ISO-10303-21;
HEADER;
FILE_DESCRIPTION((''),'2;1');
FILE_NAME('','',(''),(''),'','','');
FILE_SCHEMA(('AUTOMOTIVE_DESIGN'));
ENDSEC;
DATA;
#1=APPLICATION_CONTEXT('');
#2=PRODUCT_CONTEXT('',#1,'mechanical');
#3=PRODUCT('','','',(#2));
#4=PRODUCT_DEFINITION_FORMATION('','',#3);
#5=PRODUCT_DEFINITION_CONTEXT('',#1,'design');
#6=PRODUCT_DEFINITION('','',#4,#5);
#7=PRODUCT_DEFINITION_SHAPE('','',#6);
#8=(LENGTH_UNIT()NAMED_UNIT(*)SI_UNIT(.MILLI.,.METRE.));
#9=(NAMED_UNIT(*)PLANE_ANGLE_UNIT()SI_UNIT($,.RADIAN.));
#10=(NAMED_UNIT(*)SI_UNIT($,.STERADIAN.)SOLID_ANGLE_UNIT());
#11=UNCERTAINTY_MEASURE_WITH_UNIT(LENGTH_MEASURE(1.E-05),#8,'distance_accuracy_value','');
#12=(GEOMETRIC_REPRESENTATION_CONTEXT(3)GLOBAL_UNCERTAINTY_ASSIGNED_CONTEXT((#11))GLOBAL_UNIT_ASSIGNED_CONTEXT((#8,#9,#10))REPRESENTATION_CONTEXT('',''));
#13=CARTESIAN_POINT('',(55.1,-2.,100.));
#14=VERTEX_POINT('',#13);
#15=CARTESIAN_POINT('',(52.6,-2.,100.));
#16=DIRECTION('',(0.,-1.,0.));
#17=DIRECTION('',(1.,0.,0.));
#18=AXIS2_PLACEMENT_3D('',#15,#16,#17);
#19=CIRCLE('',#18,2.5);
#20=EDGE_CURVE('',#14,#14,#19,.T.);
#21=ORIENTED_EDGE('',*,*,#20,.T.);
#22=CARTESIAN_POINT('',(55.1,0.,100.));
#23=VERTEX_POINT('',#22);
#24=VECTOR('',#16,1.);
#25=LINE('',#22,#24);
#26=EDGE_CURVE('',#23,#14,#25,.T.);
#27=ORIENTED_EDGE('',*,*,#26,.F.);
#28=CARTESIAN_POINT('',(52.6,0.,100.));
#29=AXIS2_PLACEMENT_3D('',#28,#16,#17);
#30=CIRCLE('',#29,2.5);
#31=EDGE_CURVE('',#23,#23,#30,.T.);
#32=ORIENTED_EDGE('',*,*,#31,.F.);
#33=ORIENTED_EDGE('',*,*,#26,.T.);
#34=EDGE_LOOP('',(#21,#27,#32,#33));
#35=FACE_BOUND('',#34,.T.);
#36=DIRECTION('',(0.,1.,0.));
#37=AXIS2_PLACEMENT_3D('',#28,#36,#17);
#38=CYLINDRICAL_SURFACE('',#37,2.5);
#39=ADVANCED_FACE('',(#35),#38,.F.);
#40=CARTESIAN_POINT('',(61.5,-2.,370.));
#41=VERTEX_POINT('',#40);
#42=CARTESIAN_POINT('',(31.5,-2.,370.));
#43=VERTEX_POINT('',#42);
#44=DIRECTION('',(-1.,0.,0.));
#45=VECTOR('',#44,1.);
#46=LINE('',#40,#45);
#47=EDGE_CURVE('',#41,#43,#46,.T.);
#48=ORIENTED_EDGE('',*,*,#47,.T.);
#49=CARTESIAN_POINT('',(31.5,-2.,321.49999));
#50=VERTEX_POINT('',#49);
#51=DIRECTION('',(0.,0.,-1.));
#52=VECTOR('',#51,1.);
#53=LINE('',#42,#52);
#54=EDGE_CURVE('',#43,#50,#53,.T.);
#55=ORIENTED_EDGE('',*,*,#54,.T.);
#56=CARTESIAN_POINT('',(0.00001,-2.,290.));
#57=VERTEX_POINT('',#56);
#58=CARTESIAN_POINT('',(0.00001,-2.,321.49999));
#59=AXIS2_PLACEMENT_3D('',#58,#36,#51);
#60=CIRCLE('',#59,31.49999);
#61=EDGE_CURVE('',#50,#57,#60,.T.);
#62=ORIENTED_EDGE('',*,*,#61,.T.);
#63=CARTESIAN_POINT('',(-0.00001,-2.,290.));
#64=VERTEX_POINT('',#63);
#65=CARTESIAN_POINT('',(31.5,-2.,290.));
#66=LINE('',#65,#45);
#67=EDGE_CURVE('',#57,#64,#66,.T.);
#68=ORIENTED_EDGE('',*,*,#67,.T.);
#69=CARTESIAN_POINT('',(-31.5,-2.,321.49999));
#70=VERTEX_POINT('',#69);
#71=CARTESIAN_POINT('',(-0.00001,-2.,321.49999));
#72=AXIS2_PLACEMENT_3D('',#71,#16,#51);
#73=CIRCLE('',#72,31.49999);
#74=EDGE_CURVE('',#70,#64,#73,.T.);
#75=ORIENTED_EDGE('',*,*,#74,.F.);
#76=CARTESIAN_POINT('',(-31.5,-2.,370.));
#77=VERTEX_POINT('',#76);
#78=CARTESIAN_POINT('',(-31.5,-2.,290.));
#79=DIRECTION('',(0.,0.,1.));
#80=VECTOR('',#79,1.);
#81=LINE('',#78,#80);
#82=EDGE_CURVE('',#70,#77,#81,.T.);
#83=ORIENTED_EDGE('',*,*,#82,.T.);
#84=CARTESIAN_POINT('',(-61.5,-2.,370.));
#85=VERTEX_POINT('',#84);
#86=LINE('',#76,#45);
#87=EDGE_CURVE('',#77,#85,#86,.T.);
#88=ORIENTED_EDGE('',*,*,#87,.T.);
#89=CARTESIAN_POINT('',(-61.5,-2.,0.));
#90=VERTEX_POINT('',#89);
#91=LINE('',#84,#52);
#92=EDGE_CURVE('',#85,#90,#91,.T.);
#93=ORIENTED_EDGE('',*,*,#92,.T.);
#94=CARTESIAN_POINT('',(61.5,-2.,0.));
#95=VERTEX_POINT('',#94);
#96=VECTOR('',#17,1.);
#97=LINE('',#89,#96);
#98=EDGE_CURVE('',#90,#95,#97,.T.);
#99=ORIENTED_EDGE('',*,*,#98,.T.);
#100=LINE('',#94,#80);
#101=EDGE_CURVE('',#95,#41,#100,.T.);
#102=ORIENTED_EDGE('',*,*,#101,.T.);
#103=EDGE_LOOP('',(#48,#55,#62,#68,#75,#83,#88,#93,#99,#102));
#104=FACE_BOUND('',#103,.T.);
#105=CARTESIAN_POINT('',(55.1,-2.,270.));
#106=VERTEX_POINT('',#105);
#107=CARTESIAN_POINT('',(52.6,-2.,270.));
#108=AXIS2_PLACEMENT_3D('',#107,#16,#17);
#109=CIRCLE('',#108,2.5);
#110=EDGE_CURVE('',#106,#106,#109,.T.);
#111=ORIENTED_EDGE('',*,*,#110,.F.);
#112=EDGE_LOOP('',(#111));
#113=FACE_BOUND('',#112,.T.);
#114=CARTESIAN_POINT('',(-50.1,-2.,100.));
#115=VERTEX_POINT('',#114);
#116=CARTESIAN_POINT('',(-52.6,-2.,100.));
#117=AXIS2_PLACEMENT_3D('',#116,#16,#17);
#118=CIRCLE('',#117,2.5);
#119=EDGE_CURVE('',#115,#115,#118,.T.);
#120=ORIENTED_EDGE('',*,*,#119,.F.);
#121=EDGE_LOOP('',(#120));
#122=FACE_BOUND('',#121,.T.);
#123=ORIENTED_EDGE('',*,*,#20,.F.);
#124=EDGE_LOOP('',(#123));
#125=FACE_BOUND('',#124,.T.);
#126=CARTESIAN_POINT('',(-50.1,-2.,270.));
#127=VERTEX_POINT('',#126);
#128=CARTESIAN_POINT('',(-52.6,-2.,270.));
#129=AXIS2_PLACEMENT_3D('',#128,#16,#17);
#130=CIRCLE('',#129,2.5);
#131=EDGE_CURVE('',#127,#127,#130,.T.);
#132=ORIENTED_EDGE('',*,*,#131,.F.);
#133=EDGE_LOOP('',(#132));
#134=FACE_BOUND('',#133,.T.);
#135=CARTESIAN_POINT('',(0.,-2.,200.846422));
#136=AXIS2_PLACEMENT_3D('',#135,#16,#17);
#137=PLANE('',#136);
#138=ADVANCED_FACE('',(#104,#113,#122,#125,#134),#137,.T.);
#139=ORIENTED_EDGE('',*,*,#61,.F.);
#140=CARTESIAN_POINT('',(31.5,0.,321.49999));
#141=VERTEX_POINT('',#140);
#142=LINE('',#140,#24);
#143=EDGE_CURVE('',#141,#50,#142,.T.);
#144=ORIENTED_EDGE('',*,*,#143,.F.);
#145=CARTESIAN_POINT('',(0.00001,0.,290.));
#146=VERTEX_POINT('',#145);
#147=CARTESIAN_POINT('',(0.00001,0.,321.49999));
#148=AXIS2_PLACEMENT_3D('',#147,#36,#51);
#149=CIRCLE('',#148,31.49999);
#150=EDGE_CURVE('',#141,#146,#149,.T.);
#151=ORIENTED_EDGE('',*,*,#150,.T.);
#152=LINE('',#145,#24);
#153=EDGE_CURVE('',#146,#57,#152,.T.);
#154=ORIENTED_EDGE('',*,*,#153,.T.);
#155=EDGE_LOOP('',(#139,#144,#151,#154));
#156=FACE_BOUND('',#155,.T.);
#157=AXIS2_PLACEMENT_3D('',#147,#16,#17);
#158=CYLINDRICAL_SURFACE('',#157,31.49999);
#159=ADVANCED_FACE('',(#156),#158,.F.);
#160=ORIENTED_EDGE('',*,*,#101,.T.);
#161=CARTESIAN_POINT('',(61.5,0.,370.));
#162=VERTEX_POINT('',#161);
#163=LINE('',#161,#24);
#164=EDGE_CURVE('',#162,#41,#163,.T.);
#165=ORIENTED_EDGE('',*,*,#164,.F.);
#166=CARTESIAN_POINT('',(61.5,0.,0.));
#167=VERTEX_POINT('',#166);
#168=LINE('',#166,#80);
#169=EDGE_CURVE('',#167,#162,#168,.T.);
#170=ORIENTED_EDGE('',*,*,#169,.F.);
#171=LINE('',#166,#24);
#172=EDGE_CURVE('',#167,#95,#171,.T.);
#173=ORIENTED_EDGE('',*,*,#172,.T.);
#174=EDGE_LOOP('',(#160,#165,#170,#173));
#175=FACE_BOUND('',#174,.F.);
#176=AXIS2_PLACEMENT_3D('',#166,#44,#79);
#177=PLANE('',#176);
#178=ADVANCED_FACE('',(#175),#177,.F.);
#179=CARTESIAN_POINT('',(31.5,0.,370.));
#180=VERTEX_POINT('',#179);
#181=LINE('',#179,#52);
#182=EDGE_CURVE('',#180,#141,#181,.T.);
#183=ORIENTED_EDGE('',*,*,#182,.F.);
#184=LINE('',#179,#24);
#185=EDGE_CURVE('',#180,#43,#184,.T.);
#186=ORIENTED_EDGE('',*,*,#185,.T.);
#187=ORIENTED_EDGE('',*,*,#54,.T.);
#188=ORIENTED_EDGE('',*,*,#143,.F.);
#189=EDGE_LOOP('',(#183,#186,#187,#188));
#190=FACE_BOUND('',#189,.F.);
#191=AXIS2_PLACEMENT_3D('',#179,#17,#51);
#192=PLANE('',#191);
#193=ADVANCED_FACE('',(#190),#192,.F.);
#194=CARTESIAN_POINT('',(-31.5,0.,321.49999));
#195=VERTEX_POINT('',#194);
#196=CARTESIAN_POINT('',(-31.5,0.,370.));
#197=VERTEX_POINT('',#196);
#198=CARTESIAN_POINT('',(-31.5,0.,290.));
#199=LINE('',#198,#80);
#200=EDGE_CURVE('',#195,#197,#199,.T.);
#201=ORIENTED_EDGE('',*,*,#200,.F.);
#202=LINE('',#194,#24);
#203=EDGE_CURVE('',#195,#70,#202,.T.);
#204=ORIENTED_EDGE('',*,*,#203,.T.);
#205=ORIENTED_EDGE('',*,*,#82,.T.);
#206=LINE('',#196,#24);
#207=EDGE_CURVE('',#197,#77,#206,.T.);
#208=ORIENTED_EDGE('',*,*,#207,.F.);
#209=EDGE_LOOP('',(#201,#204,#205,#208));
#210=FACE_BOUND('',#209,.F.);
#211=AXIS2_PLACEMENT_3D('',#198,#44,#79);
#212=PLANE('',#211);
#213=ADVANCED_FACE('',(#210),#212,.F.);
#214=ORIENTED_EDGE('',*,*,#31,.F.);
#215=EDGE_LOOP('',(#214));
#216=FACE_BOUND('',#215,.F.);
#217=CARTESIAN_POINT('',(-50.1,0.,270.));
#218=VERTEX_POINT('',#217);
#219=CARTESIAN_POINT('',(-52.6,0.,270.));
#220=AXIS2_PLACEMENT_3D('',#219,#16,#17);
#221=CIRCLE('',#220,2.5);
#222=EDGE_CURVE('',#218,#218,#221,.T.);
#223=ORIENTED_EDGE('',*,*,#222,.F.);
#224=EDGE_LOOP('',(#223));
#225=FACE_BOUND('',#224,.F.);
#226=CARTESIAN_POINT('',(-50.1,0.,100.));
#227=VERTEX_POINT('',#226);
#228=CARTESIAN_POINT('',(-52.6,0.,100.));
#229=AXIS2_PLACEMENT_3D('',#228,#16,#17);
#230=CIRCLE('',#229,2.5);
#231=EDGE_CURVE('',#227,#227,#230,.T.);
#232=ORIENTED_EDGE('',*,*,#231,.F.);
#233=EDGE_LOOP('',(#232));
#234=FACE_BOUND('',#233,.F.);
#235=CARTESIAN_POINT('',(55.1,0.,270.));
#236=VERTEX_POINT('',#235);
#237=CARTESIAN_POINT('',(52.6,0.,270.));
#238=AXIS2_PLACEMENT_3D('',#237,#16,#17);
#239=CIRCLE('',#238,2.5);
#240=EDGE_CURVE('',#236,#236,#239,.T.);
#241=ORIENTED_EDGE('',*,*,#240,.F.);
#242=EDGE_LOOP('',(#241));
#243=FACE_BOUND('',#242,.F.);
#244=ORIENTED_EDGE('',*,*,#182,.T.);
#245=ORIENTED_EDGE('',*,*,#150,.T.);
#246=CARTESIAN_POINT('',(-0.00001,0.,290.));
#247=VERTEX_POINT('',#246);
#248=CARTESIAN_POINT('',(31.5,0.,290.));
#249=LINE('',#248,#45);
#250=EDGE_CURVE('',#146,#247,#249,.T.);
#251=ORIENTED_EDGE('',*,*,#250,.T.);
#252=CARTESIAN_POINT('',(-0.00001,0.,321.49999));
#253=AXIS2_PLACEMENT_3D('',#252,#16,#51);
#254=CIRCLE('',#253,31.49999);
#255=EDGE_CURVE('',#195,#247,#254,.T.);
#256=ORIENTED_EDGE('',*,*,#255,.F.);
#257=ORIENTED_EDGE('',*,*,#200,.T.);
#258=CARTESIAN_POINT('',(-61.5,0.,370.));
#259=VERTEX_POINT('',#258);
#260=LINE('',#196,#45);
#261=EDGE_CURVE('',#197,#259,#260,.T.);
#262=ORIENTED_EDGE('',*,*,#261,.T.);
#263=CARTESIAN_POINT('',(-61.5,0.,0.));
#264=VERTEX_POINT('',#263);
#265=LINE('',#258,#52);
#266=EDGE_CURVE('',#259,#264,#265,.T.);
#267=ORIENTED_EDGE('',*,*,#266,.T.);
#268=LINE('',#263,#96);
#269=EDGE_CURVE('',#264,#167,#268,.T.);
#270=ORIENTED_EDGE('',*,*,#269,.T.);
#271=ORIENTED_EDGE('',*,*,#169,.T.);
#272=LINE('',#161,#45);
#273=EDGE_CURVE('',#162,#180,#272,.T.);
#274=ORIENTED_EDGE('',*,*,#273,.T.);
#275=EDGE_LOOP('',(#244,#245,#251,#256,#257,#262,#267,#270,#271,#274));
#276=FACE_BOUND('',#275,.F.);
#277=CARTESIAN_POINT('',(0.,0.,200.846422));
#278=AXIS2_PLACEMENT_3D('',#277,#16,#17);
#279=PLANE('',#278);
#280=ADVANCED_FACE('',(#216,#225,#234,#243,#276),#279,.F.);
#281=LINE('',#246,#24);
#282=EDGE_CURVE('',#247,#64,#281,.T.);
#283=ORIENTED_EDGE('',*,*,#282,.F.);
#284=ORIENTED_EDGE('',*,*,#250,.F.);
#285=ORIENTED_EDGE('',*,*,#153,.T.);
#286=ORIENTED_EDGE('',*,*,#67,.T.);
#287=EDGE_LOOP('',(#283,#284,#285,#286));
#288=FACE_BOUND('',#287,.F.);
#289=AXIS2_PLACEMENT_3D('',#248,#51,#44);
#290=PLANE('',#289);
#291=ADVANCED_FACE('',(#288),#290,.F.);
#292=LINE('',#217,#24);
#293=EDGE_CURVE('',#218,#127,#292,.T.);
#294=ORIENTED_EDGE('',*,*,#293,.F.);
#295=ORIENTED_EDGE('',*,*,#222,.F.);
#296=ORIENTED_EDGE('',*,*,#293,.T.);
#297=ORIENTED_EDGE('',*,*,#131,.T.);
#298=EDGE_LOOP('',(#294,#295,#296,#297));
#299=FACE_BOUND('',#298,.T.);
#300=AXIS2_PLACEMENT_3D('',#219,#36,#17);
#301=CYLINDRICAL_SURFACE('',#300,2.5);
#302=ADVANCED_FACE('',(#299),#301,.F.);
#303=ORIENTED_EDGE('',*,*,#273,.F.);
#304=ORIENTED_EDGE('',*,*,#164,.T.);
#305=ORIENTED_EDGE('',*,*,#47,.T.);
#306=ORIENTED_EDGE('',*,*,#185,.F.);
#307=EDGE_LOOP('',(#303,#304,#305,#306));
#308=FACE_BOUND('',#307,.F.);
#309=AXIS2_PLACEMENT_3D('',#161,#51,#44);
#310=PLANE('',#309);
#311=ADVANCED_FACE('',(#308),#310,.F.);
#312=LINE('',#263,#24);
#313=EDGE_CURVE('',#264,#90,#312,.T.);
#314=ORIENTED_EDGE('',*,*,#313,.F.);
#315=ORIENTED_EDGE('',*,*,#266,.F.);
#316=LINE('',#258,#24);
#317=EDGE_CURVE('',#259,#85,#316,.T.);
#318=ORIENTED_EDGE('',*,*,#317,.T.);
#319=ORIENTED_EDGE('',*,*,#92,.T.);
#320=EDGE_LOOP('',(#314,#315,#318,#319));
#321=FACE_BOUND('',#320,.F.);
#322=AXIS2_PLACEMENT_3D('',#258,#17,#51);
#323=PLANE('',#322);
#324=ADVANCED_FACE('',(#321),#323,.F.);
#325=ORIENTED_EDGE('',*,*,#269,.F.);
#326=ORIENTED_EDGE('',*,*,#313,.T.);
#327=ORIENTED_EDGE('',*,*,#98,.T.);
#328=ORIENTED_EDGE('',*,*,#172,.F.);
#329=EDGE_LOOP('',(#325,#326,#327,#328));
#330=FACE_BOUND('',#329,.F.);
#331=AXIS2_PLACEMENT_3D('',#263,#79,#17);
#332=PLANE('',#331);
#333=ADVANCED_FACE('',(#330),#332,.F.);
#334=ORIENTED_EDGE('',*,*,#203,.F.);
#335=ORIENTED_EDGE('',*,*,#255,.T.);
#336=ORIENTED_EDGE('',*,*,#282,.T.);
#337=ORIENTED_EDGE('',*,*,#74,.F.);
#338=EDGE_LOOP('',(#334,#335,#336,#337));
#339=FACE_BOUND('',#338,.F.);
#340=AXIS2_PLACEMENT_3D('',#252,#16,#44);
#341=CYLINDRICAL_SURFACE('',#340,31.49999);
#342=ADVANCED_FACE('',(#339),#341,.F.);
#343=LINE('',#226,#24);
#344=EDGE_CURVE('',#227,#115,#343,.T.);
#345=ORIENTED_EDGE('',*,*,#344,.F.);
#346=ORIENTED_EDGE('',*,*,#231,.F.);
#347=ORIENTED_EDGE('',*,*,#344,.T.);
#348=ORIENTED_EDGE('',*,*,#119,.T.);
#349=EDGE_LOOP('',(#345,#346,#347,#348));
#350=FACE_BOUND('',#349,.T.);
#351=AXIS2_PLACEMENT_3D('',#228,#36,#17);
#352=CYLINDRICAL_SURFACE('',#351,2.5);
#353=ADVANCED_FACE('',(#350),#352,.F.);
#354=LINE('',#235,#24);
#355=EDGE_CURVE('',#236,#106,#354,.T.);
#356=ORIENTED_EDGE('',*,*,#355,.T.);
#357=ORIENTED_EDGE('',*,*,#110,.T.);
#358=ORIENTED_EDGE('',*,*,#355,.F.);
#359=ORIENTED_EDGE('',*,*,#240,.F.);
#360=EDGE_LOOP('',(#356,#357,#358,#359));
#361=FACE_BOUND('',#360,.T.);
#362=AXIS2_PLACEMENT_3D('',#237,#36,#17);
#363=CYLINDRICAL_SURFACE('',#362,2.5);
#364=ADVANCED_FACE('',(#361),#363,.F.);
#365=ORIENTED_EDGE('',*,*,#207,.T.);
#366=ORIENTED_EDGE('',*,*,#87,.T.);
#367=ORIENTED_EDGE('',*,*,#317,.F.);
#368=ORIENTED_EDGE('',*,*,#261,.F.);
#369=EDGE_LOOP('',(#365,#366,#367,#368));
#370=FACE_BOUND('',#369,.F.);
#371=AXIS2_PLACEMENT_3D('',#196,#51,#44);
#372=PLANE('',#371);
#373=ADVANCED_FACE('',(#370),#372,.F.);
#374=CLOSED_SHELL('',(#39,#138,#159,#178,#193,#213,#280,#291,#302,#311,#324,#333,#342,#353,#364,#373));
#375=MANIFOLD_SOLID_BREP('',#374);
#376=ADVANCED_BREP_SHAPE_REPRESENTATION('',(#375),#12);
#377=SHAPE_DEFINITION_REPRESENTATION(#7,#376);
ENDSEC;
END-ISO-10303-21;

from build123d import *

# Parameters (mm, degrees)
F0_R     = 2.5
F1_DEPTH = 2
F2_R     = 31.49999


# Not quite as in the source:
# - a fillet or chamfer is up to 0.001 mm smaller than in the source, because OpenCascade refuses the exact size


with BuildPart() as f1:
    # F0 (on Front) → F1 (new body)
    with BuildSketch(Plane.XZ):
        Polygon((-61.5, 0), (0, 0), (61.5, 0), (61.5, 370), (31.5, 370), (31.5, 290), (5.5, 290), (-5.5, 290), (-31.5, 290), (-31.5, 370), (-61.5, 370), align=None)
        with Locations((-52.6, 100)):
            Circle(F0_R, mode=Mode.SUBTRACT)
        with Locations((52.6, 100)):
            Circle(F0_R, mode=Mode.SUBTRACT)
        with Locations((-52.6, 270)):
            Circle(F0_R, mode=Mode.SUBTRACT)
        with Locations((52.6, 270)):
            Circle(F0_R, mode=Mode.SUBTRACT)
    extrude(amount=F1_DEPTH)

    # F2 (radius 31.5 in the source; OpenCascade refuses exactly that, so slightly less here)
    f2_edges = [f1.edges().sort_by_distance(p)[0] for p in [
        (-31.5, -1, 290),
        (31.5, -1, 290),
    ]]
    fillet(f2_edges, radius=F2_R)


solid = f1.part
